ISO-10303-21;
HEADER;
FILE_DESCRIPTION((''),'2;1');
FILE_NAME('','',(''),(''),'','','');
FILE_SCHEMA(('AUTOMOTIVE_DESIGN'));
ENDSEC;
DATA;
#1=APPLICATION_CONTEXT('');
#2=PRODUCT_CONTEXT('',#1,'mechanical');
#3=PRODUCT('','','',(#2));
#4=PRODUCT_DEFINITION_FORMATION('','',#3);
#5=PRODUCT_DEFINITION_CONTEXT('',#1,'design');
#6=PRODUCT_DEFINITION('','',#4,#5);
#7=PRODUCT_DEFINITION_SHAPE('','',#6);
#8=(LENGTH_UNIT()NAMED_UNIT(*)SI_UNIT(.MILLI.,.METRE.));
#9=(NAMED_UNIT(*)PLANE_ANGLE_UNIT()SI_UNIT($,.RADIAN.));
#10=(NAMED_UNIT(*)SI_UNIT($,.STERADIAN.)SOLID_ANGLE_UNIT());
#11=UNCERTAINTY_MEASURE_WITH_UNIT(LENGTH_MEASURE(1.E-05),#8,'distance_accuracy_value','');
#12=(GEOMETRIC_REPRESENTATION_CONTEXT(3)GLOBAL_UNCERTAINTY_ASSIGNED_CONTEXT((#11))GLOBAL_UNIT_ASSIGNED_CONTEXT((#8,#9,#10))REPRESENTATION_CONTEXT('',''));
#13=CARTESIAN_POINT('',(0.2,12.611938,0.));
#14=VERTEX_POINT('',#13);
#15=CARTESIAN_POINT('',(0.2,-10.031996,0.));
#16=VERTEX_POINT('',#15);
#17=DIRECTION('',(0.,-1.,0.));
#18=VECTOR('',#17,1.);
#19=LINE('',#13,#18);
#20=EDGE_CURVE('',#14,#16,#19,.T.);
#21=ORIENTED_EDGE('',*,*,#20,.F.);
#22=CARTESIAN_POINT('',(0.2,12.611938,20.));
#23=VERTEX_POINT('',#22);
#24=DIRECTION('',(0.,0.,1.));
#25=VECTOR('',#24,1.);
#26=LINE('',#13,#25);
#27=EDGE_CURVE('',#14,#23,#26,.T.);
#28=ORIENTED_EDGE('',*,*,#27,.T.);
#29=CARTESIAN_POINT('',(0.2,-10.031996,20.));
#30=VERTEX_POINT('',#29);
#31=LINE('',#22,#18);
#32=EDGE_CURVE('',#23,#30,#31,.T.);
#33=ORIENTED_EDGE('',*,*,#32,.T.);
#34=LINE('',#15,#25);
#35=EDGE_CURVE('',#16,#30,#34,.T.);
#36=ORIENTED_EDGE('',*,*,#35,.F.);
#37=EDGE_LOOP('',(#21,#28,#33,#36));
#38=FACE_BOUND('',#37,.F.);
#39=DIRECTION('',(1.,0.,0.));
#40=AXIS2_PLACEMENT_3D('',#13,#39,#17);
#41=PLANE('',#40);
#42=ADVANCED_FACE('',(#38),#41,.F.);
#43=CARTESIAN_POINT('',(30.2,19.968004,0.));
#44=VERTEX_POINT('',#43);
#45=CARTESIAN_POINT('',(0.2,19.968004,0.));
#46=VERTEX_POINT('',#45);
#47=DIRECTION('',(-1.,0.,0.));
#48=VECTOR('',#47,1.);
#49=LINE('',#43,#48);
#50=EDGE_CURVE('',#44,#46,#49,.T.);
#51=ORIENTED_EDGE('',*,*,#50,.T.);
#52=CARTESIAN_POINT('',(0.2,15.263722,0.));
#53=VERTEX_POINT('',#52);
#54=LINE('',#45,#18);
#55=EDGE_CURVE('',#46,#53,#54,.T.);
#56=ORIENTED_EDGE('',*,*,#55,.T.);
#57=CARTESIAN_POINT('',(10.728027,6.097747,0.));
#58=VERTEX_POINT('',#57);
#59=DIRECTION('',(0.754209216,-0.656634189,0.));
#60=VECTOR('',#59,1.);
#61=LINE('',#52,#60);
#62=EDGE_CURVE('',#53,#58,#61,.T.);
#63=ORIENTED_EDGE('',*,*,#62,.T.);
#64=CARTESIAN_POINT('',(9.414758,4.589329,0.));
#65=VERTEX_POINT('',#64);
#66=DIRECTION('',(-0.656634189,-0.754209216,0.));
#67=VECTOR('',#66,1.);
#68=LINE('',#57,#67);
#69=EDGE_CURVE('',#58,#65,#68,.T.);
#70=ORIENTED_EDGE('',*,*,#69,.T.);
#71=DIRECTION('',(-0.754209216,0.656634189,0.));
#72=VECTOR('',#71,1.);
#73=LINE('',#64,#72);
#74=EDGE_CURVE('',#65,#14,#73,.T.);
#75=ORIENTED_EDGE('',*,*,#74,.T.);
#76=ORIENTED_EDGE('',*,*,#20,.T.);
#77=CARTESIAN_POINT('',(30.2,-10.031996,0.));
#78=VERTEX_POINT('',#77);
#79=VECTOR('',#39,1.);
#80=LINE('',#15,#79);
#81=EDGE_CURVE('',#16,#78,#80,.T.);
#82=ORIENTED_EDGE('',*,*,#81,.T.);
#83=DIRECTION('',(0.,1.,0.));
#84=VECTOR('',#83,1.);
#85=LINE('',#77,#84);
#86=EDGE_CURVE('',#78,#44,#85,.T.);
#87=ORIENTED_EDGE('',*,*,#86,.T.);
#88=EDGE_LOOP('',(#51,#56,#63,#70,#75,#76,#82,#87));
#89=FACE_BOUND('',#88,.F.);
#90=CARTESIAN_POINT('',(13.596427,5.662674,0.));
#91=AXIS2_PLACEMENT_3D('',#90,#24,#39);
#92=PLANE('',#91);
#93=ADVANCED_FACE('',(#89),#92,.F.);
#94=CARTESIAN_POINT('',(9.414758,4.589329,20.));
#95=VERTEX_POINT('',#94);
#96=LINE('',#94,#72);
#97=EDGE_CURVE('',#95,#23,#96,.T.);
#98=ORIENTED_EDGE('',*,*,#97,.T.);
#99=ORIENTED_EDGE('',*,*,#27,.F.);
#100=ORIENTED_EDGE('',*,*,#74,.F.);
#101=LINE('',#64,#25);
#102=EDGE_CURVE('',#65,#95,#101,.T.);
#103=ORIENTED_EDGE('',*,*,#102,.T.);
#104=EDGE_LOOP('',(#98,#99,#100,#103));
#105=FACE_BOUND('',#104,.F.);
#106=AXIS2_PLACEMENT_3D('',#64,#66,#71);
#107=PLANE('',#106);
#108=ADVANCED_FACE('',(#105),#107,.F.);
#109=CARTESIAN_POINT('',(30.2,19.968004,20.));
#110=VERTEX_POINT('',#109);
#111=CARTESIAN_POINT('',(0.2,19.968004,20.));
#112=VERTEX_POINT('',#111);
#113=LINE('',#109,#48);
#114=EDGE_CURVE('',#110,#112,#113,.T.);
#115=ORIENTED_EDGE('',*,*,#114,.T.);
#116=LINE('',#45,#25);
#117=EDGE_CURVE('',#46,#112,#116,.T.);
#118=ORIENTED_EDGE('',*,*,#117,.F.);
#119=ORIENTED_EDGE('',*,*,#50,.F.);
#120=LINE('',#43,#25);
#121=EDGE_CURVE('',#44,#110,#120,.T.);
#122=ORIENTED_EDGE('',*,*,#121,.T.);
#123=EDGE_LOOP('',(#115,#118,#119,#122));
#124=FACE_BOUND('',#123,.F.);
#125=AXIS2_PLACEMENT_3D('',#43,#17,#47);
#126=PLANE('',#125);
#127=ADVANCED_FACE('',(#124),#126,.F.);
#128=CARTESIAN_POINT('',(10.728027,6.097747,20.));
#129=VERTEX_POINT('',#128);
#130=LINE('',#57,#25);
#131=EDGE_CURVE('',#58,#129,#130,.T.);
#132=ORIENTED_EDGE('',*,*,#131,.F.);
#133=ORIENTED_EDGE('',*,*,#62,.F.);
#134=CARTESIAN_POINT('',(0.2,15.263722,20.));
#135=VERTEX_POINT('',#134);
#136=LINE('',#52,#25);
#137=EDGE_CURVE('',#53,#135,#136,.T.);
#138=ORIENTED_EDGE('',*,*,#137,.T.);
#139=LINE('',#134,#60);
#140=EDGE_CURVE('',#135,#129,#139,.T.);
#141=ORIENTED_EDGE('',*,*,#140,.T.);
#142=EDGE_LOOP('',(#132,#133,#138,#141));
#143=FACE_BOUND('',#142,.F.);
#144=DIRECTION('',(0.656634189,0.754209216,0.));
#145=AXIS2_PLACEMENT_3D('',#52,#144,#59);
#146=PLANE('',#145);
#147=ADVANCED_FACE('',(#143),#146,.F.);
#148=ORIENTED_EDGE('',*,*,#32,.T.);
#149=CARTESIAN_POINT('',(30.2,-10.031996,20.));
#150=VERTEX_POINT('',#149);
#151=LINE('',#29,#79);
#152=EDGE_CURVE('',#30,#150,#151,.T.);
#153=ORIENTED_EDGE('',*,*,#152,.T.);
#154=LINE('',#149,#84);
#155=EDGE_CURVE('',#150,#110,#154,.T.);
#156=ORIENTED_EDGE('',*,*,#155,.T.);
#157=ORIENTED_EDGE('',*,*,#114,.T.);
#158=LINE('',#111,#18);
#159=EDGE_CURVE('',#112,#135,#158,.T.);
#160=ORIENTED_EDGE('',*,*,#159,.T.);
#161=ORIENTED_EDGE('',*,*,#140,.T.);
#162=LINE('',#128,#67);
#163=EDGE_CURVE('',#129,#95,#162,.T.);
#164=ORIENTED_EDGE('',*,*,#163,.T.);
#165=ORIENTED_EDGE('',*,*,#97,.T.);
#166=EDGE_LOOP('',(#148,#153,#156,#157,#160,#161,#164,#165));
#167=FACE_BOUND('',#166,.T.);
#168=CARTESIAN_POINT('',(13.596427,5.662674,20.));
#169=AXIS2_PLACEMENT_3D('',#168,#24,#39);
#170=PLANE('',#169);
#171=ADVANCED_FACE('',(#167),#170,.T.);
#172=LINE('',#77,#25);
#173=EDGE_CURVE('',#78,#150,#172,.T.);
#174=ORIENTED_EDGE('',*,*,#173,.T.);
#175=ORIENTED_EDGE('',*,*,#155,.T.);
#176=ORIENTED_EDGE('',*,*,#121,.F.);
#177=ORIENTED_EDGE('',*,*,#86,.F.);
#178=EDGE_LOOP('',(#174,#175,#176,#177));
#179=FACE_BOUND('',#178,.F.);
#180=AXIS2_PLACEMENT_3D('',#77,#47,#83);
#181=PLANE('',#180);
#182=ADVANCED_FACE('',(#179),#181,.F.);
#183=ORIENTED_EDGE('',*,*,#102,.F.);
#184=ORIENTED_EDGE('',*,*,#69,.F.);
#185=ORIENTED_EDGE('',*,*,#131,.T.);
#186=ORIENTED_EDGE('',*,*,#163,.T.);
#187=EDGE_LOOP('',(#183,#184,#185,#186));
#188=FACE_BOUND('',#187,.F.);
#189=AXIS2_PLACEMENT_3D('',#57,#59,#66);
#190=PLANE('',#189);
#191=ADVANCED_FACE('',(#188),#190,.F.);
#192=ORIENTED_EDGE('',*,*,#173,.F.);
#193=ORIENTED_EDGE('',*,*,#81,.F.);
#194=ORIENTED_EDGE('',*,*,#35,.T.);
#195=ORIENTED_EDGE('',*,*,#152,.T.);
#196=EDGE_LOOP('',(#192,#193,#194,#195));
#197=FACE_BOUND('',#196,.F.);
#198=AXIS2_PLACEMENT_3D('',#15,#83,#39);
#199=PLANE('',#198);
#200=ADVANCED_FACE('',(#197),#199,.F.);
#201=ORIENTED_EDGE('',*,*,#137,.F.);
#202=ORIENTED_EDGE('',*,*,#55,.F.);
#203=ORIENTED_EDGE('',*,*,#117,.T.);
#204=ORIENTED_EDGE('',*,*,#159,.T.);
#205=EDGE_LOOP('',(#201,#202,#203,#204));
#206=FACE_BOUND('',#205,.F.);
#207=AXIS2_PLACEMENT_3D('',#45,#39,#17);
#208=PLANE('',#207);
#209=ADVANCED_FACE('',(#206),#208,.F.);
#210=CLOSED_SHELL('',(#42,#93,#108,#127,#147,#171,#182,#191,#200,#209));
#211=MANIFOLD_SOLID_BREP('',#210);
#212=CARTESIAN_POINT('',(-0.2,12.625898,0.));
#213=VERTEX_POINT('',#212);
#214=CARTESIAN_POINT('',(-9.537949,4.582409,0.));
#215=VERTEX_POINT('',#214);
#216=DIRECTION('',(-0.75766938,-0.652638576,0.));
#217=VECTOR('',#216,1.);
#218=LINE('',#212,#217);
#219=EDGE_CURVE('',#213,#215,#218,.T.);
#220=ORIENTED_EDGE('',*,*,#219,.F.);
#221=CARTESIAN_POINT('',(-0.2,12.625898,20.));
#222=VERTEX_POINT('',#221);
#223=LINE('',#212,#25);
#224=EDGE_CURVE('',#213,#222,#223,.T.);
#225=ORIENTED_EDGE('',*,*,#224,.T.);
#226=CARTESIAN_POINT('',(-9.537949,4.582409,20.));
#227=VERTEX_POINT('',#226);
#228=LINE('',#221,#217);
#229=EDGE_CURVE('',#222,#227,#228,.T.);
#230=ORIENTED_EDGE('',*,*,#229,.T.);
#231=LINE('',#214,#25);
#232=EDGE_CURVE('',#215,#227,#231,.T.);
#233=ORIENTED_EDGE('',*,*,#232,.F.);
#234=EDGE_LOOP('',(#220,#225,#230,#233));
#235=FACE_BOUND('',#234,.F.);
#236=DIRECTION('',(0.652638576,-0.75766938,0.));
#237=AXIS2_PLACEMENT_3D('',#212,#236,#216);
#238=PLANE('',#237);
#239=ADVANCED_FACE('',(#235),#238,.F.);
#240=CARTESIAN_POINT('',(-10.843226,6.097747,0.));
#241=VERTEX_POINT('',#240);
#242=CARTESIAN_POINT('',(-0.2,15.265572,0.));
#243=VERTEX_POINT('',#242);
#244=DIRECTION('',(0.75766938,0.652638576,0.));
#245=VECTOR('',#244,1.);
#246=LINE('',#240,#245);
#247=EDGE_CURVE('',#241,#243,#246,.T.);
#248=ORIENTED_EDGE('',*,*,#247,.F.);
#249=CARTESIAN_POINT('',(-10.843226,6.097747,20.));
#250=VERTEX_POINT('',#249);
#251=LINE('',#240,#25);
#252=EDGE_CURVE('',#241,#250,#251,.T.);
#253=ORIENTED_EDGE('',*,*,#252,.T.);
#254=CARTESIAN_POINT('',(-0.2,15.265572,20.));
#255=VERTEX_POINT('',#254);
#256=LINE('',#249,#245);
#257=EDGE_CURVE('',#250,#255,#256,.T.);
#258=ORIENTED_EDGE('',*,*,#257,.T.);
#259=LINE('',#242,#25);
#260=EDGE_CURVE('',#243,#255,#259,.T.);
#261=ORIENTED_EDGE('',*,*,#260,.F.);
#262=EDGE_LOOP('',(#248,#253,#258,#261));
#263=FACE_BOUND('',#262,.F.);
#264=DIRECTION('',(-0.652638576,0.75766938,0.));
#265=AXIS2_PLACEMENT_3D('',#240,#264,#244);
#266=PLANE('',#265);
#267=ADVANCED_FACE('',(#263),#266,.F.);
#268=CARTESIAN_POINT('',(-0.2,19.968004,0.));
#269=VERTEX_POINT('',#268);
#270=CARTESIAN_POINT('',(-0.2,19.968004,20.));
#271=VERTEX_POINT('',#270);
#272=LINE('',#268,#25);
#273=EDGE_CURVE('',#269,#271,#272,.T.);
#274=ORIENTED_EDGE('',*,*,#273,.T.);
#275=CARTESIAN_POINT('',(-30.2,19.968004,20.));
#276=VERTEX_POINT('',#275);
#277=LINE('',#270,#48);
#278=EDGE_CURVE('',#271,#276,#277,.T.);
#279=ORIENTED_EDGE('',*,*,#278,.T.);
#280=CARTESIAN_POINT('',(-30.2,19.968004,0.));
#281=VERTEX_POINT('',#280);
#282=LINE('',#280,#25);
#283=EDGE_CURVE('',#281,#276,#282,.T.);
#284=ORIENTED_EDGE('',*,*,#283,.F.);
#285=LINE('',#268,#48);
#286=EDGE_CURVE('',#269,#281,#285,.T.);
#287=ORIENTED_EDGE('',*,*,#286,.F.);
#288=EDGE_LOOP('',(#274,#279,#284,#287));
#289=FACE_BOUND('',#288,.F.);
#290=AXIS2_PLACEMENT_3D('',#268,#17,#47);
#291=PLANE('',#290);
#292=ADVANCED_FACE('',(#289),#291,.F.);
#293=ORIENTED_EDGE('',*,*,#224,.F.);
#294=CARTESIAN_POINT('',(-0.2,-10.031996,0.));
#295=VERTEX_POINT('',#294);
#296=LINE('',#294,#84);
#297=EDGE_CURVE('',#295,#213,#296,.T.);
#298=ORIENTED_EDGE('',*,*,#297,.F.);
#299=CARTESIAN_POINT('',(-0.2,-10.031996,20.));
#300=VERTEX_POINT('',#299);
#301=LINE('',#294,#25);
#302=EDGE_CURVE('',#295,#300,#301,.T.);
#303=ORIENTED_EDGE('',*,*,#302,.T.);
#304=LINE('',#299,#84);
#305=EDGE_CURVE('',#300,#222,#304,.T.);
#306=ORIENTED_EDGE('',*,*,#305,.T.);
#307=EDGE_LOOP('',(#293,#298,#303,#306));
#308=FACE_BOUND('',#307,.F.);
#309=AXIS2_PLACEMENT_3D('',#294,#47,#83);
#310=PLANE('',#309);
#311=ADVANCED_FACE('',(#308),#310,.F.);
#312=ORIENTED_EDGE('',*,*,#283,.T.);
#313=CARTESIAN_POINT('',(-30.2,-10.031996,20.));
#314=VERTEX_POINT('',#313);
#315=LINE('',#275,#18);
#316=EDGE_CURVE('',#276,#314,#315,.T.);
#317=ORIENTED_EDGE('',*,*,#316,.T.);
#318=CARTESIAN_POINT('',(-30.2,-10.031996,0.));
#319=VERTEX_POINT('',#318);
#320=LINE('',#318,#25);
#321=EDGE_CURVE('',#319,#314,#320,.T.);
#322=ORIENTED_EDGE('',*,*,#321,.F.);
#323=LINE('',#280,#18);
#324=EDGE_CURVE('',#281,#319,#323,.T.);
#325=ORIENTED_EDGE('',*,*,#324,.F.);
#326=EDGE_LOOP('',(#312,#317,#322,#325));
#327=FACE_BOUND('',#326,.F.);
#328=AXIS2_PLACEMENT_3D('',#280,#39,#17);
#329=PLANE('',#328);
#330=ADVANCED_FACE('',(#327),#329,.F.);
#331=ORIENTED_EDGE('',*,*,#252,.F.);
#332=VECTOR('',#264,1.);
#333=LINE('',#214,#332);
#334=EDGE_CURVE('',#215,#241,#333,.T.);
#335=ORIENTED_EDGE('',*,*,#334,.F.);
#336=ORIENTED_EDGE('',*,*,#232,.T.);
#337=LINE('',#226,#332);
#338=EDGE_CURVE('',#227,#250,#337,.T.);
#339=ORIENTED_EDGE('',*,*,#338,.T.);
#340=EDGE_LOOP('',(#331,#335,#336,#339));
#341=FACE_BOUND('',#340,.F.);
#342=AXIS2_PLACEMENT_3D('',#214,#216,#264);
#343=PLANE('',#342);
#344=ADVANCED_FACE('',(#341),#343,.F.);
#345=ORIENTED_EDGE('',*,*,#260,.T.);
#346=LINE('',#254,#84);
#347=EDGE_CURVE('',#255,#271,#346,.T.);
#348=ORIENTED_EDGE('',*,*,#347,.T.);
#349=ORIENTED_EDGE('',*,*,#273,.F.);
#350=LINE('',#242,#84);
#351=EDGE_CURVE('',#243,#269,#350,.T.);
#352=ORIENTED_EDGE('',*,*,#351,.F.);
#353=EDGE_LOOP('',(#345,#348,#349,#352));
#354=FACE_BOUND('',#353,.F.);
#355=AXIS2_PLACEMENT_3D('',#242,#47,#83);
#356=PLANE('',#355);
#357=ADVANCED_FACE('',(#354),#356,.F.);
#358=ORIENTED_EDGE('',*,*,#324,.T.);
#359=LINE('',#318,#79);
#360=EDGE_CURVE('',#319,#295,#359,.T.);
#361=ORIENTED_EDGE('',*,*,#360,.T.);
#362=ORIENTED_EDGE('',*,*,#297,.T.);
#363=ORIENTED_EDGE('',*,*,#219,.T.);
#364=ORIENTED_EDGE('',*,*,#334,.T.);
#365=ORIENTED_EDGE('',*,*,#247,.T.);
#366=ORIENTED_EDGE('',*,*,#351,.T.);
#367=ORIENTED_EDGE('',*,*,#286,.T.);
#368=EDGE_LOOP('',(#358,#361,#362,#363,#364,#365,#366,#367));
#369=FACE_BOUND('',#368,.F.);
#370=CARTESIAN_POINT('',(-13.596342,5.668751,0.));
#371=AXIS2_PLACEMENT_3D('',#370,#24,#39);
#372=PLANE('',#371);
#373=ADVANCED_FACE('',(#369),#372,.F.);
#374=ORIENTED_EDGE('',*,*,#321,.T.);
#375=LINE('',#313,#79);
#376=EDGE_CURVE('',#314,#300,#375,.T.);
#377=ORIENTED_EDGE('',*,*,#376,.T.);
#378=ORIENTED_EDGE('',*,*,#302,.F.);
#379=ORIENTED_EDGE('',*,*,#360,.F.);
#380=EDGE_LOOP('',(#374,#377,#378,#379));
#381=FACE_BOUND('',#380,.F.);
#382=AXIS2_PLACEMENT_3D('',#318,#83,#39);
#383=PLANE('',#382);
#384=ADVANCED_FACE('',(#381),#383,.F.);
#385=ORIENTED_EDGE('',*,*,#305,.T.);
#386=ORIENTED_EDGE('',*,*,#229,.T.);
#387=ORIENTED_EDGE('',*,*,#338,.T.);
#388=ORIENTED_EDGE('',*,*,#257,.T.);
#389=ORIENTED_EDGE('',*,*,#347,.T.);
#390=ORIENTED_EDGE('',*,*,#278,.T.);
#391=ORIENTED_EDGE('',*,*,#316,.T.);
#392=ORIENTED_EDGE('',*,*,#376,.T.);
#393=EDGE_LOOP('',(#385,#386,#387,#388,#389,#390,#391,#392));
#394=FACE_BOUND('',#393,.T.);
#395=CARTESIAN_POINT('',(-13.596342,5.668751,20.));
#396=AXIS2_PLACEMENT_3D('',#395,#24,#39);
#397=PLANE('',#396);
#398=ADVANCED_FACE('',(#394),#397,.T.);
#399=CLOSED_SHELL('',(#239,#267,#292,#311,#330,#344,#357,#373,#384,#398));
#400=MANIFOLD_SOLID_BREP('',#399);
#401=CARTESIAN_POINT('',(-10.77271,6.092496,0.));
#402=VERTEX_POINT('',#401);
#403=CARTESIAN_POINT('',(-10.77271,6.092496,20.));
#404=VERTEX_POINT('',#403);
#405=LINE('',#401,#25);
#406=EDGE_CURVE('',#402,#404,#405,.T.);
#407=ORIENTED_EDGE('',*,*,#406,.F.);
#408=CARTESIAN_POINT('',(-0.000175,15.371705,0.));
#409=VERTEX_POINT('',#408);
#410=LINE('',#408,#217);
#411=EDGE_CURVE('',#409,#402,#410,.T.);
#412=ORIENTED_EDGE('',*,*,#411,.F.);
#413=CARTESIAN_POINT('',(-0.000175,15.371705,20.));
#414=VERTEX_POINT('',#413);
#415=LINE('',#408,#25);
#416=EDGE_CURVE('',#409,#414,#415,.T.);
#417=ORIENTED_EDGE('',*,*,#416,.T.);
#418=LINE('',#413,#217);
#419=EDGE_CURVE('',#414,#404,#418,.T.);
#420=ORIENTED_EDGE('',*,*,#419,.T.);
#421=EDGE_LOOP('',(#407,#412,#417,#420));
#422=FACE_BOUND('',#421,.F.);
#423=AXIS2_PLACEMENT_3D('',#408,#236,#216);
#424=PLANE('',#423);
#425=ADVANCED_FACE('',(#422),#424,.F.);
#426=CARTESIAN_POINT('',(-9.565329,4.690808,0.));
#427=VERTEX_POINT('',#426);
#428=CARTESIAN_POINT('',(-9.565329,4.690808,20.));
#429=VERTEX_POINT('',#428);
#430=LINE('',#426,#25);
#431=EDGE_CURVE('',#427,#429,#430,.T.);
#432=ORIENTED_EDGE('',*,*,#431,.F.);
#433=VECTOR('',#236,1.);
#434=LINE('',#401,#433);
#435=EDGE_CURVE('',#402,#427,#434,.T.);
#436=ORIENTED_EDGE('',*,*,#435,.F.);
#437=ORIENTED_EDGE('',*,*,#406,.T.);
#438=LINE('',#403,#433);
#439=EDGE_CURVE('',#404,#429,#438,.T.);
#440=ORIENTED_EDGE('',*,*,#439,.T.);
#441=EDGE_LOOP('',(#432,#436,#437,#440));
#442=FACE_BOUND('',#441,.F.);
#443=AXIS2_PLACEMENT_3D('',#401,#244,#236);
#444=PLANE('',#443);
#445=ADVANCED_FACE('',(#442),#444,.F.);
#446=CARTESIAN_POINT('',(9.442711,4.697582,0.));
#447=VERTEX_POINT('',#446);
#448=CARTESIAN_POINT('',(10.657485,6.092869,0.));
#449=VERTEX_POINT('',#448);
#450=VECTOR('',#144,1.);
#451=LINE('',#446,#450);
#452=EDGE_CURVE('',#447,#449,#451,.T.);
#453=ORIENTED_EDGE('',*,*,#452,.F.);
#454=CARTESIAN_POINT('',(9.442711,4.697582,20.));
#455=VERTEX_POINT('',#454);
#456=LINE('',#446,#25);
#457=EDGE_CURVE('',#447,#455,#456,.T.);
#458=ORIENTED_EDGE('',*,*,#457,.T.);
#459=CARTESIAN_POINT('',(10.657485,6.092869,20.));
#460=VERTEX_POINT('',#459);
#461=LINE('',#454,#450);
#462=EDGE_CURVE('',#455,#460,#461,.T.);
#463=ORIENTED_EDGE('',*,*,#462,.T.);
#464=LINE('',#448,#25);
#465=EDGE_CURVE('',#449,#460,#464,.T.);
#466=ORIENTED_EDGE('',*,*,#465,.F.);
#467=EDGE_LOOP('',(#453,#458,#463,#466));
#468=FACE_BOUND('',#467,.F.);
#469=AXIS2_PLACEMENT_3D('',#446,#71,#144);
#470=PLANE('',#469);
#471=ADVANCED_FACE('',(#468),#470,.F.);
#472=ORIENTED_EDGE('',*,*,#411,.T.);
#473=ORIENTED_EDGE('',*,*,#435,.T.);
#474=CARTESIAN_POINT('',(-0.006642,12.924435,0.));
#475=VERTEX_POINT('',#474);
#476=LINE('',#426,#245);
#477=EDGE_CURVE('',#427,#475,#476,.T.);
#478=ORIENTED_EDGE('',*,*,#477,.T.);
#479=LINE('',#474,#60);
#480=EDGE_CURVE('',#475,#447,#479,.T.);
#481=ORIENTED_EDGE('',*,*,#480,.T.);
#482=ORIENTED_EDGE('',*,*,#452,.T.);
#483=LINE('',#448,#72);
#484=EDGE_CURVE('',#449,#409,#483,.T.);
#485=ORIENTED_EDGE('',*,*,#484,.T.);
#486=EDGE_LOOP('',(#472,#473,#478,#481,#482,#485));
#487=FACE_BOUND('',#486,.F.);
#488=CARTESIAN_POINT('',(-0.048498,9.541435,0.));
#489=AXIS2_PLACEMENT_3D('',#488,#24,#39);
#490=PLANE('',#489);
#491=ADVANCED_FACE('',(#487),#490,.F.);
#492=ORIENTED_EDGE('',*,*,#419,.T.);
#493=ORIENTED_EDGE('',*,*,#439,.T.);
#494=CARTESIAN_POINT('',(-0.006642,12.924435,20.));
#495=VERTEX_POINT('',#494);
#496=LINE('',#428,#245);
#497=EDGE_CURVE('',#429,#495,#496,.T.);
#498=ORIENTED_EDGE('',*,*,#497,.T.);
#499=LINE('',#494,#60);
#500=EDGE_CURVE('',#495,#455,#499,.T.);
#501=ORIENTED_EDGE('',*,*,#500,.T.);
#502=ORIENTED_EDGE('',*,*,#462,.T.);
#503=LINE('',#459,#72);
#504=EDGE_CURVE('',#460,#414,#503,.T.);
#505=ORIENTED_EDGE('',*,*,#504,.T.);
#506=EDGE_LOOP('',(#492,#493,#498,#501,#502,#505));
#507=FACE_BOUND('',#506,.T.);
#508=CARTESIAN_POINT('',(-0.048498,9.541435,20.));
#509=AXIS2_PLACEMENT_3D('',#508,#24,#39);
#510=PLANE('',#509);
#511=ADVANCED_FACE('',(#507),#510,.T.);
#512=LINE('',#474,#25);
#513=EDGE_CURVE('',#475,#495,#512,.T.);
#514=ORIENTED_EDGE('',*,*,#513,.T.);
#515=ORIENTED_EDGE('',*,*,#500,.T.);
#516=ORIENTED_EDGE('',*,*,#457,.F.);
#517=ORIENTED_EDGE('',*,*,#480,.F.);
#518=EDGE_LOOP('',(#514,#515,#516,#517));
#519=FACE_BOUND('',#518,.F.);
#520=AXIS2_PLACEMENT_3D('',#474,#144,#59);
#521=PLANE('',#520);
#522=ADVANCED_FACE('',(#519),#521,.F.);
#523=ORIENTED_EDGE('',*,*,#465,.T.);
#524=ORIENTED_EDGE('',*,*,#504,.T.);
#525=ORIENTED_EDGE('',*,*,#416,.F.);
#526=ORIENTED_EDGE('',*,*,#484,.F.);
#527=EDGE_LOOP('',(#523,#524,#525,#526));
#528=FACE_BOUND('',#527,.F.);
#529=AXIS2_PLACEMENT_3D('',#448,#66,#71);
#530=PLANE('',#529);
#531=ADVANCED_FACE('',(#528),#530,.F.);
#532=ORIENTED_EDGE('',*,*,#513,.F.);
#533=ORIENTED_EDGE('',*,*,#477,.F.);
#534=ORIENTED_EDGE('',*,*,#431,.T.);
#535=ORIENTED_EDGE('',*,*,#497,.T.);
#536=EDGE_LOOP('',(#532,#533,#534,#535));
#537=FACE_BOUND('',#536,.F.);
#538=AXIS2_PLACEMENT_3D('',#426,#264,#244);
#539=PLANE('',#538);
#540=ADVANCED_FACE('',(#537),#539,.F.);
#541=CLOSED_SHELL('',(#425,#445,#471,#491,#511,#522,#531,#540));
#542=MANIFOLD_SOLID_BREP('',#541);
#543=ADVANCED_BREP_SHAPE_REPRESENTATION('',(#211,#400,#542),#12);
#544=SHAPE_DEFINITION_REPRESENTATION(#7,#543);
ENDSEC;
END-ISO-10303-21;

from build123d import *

# Parameters (mm, degrees)
F1_DEPTH = 20
F3_DEPTH = 20


# Not quite as in the source:
# - ends of sketch curves that miss each other by under 0.0002 mm in the source are joined


with BuildPart() as f1:
    # F0 (on Top) → F1 (new body)
    with BuildSketch(Plane.XY):
        Polygon((-0.2, 19.9680037051), (-30.2, 19.9680037051), (-30.2, -10.0319962949), (-0.2, -10.0319962949), (-0.2, 12.6258979241), (-9.537948603, 4.5824087189), (-10.8432257548, 6.0977474786), (-0.2, 15.2655717093), align=None)
    extrude(amount=F1_DEPTH)


with BuildPart() as f1b:
    # F0 (on Top) → F1, piece 2 (new body)
    with BuildSketch(Plane.XY):
        Polygon((0.2, 19.9680037051), (0.2, 15.2637217937), (10.7280267403, 6.0977474786), (9.4147583618, 4.5893290465), (0.2, 12.6119377033), (0.2, -10.0319962949), (30.2, -10.0319962949), (30.2, 19.9680037051), align=None)
    extrude(amount=F1_DEPTH)


with BuildPart() as f3:
    # F2 (on Top) → F3 (new body)
    with BuildSketch(Plane.XY):
        Polygon((-10.772710357, 6.0924959384), (-9.5653289916, 4.6908075856), (-0.0066424788, 12.9244352324), (9.44271132, 4.6975816776), (10.65748457, 6.0928687273), (-0.0001748021, 15.3717045883), align=None)
    extrude(amount=F3_DEPTH)


solid = Compound([f1.part, f1b.part, f3.part])
